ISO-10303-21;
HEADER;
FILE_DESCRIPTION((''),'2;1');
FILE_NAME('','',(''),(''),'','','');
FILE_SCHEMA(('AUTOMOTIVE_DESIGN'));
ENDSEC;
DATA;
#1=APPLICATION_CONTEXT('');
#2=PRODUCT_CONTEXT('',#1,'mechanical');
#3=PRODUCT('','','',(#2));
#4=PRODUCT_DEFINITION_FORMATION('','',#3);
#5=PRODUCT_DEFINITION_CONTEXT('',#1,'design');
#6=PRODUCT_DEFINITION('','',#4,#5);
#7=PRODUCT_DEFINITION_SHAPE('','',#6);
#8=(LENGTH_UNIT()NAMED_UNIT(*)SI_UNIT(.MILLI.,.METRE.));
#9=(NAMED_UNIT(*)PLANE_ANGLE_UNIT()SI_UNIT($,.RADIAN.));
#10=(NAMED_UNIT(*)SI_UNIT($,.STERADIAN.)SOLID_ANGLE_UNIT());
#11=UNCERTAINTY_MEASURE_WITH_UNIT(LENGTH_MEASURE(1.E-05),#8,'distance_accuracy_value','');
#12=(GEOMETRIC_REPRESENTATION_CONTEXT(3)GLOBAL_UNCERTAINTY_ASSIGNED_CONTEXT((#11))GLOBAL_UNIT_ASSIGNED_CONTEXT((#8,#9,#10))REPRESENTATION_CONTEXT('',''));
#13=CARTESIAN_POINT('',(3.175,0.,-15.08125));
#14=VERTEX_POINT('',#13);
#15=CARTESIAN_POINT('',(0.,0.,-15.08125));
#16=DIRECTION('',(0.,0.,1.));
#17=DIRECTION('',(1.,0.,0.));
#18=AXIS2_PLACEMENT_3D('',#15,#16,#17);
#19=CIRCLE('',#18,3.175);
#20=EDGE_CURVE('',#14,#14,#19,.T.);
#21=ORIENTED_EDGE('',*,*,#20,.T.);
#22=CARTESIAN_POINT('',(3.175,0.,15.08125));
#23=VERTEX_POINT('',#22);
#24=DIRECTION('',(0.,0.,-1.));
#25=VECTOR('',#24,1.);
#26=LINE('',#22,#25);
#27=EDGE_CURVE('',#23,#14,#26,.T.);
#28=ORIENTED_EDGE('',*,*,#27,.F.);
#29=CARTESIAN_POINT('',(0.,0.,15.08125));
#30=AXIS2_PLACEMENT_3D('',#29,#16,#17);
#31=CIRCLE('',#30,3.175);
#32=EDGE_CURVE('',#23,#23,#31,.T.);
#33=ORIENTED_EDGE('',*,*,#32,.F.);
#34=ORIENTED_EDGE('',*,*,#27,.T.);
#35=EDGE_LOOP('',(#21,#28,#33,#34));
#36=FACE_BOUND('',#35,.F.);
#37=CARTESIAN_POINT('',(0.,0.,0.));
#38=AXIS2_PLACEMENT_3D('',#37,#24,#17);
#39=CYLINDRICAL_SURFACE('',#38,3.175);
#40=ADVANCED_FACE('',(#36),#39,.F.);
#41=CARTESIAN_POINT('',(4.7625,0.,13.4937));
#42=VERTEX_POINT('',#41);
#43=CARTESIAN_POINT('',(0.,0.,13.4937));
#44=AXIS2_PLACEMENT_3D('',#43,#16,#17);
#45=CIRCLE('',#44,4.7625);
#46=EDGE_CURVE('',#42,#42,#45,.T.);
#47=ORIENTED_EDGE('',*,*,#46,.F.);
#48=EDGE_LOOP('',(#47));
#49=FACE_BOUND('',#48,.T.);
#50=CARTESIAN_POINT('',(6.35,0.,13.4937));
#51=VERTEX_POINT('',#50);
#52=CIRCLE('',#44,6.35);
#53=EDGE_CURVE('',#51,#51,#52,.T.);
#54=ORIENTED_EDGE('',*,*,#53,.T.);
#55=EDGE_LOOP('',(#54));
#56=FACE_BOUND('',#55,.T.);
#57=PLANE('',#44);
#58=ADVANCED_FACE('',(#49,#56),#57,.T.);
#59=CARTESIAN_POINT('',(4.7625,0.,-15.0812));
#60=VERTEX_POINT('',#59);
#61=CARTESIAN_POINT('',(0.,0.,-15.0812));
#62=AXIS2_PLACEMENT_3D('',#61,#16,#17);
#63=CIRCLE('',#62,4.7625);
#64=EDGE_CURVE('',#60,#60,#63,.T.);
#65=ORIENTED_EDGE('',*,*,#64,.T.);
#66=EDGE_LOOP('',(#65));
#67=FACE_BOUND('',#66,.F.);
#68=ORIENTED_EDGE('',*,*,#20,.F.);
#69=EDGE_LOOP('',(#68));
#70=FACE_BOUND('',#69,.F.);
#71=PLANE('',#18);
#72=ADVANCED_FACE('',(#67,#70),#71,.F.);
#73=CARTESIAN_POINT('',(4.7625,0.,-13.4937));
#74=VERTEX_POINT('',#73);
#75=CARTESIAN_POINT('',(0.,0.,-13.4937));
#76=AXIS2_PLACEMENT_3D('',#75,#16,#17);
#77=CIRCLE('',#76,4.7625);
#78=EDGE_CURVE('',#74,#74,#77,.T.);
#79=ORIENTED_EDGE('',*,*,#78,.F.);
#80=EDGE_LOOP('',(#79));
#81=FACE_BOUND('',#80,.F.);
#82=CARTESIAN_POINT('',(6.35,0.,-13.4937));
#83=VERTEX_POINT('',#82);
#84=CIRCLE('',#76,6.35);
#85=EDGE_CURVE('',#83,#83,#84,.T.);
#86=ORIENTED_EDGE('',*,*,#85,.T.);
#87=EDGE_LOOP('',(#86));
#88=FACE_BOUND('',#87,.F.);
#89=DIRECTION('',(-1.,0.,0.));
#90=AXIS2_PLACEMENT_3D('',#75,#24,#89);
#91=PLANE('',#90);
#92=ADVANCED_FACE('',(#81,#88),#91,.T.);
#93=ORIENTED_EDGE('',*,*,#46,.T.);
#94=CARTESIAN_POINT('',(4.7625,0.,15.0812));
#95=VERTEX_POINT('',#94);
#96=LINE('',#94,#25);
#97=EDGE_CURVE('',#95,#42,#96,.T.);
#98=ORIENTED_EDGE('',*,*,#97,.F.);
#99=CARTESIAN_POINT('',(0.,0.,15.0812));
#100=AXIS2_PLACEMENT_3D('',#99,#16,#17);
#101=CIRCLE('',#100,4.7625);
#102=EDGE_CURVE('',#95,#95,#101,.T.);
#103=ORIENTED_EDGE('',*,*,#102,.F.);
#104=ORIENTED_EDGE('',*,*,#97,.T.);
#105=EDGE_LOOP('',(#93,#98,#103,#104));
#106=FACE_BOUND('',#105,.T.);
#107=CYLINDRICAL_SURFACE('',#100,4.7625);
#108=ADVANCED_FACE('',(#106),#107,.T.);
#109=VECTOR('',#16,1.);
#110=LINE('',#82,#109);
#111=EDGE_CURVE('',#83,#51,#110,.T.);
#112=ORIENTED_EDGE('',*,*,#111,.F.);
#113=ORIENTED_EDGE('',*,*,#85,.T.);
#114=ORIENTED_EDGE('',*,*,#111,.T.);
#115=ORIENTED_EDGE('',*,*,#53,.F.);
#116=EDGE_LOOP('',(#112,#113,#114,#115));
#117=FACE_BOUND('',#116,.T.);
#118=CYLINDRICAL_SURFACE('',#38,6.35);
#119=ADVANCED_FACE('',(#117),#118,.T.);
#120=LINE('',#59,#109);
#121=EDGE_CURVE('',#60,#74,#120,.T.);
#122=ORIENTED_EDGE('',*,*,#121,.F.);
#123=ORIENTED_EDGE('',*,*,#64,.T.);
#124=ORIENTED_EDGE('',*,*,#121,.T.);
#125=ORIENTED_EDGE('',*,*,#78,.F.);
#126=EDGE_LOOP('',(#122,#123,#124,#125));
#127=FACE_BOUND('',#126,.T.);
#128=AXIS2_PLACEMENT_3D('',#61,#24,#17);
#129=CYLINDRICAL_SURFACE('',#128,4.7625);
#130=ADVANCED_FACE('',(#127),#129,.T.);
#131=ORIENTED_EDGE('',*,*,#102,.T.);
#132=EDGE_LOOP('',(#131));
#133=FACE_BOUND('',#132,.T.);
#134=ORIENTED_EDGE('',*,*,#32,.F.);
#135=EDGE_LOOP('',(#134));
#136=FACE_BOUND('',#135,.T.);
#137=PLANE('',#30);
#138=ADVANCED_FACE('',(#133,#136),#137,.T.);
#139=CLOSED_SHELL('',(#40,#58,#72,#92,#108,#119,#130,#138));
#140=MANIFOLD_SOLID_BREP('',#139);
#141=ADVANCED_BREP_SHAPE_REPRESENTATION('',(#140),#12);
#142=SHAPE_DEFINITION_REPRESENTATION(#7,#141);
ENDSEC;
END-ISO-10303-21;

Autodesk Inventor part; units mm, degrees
ref_plane "YZ Plane" through (0, 0, 0) normal (1, 0, 0) x (0, 1, 0)
ref_plane "XZ Plane" through (0, 0, 0) normal (0, 1, 0) x (-1, 0, 0)
ref_plane "XY Plane" through (0, 0, 0) normal (0, 0, 1) x (1, 0, 0)
sketch "Sketch1" plane through (0, 0, 0) normal (0, 0, 1) x (1, 0, 0)
  circle A0 centre (0, 0) radius 6.35
  circle A1 centre (0, 0) radius 3.175
  dimension "d0" = 12.7
  dimension "d13" = 3.175
extrude "Base" add sketch "Sketch1" along normal mid plane 30.1625
sketch "Sketch4" plane through (0, 0, 15.0812) normal (0, 0, 1) x (1, 0, 0)
  circle A0 centre (0, 0) radius 6.35 projected
  circle A1 centre (0, 0) radius 4.7625
  dimension "d16" = 9.525
extrude "Extrusion4" cut sketch "Sketch4" against normal blind 1.5875
mirror "Mirror2" about plane through (0, 0, 0) normal (0, 0, 1) of "Extrusion4"
properties part number "gearbox_standoff" material "Aluminum-6061"
